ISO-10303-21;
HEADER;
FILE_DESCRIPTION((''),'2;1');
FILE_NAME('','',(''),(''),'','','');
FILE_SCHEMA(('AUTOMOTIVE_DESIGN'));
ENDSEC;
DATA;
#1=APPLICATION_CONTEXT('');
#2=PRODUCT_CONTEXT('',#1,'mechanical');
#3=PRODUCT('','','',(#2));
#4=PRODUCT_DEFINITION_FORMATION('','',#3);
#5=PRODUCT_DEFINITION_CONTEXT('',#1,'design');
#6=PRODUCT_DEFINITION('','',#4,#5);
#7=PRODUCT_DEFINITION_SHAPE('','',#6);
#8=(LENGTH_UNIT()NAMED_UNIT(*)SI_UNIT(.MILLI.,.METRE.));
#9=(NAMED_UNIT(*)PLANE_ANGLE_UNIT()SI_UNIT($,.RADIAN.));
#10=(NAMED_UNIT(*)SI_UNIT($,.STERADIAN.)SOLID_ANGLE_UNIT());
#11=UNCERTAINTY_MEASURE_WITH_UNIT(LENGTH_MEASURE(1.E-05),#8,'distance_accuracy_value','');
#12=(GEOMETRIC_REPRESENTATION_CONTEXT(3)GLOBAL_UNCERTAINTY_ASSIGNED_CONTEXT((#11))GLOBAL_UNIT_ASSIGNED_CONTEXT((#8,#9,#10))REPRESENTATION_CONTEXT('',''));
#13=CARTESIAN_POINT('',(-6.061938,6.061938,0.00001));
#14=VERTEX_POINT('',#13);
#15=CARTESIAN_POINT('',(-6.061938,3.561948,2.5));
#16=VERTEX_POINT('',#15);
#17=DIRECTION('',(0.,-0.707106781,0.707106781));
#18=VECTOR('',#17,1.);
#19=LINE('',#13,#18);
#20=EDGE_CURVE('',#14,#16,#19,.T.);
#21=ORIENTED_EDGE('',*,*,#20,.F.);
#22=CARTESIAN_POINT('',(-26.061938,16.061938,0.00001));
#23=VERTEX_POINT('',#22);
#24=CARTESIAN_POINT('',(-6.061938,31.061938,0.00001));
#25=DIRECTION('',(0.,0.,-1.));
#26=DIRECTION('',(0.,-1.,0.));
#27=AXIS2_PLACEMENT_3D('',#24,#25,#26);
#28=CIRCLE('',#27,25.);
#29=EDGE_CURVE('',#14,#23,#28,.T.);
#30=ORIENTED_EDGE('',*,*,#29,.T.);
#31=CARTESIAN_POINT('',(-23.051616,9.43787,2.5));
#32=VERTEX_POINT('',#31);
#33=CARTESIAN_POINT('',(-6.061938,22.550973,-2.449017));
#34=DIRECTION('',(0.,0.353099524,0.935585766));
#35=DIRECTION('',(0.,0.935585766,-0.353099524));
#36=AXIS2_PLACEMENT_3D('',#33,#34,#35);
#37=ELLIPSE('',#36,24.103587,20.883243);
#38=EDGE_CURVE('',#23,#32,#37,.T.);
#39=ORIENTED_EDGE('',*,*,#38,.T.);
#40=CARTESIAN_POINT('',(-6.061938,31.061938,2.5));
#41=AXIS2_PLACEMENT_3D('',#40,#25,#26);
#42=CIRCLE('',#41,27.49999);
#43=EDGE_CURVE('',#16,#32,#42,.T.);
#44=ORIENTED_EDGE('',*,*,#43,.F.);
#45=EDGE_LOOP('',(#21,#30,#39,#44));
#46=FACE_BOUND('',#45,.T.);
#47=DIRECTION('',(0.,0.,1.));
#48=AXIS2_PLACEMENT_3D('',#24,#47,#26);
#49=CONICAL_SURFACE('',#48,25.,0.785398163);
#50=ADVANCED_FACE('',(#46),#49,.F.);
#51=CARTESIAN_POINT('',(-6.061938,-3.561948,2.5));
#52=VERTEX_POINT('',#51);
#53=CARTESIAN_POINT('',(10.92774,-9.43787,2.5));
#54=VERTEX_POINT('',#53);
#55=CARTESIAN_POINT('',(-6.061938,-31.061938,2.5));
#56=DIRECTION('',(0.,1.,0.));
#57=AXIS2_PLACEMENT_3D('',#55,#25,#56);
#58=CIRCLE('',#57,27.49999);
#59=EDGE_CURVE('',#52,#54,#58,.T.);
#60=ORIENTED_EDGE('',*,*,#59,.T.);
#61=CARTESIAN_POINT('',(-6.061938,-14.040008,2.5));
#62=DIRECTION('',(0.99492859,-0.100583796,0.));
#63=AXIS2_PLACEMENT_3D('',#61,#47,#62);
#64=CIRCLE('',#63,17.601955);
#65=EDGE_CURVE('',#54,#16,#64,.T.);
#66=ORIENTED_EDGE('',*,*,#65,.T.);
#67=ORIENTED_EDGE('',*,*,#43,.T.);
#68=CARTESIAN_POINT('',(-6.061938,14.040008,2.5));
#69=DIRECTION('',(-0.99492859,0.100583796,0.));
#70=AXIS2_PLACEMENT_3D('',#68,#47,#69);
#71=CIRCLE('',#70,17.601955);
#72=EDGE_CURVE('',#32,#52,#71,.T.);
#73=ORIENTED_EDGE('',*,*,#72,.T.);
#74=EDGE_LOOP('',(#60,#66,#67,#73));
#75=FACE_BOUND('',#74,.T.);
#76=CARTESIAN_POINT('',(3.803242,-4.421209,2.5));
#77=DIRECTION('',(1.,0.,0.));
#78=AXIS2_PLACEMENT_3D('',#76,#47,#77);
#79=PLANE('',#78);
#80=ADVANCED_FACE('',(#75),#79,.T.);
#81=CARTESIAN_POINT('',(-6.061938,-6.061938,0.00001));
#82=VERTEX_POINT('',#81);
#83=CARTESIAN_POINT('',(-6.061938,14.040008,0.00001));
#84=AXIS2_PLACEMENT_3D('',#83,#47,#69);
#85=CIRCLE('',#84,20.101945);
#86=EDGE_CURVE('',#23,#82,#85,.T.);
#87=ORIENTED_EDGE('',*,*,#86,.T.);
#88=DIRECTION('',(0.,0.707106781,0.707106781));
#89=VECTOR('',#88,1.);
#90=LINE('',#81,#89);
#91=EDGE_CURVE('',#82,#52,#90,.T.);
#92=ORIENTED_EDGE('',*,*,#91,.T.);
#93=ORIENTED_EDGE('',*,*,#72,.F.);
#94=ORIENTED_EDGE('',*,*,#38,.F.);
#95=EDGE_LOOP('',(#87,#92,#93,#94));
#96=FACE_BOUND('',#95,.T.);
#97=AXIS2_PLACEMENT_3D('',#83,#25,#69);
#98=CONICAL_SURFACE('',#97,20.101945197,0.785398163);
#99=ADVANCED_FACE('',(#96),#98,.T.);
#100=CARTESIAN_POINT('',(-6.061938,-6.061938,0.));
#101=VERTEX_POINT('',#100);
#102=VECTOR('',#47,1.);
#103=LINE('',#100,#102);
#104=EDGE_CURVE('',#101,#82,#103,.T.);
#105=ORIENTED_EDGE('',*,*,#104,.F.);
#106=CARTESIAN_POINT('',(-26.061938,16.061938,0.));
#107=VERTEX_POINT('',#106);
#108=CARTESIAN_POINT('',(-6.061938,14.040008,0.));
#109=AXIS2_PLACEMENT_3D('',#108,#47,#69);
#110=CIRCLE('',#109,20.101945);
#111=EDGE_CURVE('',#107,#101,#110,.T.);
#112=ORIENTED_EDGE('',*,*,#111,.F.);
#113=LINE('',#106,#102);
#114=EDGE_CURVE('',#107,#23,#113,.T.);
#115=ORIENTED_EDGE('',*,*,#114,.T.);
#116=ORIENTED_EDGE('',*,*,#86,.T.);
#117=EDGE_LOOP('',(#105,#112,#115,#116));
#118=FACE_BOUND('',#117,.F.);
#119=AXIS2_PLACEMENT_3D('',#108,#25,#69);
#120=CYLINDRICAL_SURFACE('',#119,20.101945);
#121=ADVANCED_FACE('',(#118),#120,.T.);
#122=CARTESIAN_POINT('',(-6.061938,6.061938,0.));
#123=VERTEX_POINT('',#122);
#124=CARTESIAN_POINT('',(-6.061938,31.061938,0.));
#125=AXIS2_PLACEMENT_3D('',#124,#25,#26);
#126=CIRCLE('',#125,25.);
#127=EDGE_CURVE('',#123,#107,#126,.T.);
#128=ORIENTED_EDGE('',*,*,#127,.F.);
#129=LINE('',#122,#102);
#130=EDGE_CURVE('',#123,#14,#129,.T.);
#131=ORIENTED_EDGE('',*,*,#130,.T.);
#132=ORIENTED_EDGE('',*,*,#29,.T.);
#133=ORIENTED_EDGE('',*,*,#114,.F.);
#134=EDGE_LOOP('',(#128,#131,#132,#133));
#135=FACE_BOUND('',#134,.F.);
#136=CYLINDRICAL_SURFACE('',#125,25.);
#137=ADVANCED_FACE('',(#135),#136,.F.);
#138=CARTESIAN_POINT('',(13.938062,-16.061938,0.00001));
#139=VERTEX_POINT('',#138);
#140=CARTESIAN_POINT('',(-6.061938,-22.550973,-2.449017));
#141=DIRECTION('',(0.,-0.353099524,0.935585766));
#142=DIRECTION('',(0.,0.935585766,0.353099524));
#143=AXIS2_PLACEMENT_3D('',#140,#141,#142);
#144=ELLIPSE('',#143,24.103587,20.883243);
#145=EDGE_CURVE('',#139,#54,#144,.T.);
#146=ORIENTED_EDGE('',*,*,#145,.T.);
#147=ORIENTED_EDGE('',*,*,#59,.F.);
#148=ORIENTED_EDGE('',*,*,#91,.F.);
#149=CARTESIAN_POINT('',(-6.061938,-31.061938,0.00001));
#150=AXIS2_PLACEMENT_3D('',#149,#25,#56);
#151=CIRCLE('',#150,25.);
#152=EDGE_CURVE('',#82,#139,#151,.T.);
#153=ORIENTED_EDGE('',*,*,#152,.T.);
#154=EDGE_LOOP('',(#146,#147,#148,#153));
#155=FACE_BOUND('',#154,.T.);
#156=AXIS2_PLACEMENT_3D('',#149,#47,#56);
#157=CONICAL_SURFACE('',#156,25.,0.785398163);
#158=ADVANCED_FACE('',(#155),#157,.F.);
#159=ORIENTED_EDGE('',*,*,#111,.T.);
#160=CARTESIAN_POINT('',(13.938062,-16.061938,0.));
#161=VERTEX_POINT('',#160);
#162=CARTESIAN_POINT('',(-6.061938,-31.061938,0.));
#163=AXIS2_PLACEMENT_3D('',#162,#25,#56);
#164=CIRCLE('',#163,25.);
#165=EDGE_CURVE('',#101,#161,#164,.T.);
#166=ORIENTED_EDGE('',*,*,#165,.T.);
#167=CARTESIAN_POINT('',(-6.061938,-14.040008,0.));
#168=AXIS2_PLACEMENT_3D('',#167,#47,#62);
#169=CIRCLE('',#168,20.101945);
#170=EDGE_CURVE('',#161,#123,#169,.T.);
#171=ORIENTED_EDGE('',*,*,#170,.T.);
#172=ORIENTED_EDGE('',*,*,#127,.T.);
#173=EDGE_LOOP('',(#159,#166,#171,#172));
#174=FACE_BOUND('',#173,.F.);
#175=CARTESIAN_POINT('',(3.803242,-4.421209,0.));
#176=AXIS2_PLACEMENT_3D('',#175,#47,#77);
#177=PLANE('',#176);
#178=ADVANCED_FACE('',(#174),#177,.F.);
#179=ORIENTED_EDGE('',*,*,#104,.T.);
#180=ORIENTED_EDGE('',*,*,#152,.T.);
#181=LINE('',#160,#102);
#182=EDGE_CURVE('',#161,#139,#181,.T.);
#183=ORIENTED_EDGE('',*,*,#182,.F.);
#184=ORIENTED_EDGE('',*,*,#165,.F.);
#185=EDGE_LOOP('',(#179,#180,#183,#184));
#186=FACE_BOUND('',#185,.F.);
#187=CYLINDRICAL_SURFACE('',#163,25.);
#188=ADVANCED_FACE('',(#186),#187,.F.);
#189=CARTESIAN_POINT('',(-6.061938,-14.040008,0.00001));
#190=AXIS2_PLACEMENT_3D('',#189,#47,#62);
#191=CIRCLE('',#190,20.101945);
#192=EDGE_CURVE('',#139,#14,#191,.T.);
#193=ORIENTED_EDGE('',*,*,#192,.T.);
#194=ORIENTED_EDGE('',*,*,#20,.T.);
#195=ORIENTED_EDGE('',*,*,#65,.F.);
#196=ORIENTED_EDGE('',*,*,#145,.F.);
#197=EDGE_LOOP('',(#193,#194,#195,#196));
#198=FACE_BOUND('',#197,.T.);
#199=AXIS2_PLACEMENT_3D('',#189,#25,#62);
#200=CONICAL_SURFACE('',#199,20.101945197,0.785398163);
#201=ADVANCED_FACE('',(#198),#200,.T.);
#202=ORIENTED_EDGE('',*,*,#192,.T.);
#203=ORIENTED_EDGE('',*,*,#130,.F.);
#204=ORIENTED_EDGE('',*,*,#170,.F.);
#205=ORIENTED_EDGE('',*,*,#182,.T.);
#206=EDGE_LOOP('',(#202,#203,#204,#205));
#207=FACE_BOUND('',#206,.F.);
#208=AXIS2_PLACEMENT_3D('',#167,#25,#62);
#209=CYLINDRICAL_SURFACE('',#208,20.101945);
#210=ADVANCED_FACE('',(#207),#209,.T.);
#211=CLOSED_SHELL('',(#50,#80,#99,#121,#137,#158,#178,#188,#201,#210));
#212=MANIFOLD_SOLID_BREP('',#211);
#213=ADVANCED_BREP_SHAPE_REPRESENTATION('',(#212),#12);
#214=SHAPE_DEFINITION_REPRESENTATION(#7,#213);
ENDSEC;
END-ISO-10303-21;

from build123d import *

# Parameters (mm, degrees)
F1_DEPTH = 2.5
F2_DEPTH = 2.5
F3_SIZE  = 2.49999


# Not quite as in the source:
# - a fillet or chamfer is up to 0.001 mm smaller than in the source, because OpenCascade refuses the exact size
# - a feature names something its author has since deleted; it is built from what else it names


with BuildPart() as f1:
    # F0 (on Top) → F1 (new body)
    with BuildSketch(Plane.XY):
        with BuildLine():
            ThreePointArc((-26.0619375711, 16.0619375711), (-20.9738946132, 0.5595870881), (-6.0619375711, -6.0619375711))
            Line((-6.0619375711, -6.0619375711), (-6.0619375711, 6.0619375711))
            ThreePointArc((-6.0619375711, 6.0619375711), (-17.2422774586, 8.7012577961), (-26.0619375711, 16.0619375711))
        make_face()
    extrude(amount=F1_DEPTH)

    # F0 (on Top) → F2 (join)
    with BuildSketch(Plane.XY):
        with BuildLine():
            Line((-6.0619375711, 6.0619375711), (-6.0619375711, -6.0619375711))
            ThreePointArc((-6.0619375711, -6.0619375711), (5.1184023164, -8.7012577961), (13.9380624289, -16.0619375711))
            ThreePointArc((13.9380624289, -16.0619375711), (8.8500194711, -0.5595870881), (-6.0619375711, 6.0619375711))
        make_face()
    extrude(amount=F2_DEPTH)

    # F3 (size 2.5 in the source; OpenCascade refuses exactly that, so slightly less here)
    f3_edges = [f1.edges().sort_by_distance(p)[0] for p in [
        (-20.973895, 0.559587, 2.5),
        (8.850019, -0.559587, 2.5),
    ]]
    chamfer(f3_edges, length=F3_SIZE)


solid = f1.part
